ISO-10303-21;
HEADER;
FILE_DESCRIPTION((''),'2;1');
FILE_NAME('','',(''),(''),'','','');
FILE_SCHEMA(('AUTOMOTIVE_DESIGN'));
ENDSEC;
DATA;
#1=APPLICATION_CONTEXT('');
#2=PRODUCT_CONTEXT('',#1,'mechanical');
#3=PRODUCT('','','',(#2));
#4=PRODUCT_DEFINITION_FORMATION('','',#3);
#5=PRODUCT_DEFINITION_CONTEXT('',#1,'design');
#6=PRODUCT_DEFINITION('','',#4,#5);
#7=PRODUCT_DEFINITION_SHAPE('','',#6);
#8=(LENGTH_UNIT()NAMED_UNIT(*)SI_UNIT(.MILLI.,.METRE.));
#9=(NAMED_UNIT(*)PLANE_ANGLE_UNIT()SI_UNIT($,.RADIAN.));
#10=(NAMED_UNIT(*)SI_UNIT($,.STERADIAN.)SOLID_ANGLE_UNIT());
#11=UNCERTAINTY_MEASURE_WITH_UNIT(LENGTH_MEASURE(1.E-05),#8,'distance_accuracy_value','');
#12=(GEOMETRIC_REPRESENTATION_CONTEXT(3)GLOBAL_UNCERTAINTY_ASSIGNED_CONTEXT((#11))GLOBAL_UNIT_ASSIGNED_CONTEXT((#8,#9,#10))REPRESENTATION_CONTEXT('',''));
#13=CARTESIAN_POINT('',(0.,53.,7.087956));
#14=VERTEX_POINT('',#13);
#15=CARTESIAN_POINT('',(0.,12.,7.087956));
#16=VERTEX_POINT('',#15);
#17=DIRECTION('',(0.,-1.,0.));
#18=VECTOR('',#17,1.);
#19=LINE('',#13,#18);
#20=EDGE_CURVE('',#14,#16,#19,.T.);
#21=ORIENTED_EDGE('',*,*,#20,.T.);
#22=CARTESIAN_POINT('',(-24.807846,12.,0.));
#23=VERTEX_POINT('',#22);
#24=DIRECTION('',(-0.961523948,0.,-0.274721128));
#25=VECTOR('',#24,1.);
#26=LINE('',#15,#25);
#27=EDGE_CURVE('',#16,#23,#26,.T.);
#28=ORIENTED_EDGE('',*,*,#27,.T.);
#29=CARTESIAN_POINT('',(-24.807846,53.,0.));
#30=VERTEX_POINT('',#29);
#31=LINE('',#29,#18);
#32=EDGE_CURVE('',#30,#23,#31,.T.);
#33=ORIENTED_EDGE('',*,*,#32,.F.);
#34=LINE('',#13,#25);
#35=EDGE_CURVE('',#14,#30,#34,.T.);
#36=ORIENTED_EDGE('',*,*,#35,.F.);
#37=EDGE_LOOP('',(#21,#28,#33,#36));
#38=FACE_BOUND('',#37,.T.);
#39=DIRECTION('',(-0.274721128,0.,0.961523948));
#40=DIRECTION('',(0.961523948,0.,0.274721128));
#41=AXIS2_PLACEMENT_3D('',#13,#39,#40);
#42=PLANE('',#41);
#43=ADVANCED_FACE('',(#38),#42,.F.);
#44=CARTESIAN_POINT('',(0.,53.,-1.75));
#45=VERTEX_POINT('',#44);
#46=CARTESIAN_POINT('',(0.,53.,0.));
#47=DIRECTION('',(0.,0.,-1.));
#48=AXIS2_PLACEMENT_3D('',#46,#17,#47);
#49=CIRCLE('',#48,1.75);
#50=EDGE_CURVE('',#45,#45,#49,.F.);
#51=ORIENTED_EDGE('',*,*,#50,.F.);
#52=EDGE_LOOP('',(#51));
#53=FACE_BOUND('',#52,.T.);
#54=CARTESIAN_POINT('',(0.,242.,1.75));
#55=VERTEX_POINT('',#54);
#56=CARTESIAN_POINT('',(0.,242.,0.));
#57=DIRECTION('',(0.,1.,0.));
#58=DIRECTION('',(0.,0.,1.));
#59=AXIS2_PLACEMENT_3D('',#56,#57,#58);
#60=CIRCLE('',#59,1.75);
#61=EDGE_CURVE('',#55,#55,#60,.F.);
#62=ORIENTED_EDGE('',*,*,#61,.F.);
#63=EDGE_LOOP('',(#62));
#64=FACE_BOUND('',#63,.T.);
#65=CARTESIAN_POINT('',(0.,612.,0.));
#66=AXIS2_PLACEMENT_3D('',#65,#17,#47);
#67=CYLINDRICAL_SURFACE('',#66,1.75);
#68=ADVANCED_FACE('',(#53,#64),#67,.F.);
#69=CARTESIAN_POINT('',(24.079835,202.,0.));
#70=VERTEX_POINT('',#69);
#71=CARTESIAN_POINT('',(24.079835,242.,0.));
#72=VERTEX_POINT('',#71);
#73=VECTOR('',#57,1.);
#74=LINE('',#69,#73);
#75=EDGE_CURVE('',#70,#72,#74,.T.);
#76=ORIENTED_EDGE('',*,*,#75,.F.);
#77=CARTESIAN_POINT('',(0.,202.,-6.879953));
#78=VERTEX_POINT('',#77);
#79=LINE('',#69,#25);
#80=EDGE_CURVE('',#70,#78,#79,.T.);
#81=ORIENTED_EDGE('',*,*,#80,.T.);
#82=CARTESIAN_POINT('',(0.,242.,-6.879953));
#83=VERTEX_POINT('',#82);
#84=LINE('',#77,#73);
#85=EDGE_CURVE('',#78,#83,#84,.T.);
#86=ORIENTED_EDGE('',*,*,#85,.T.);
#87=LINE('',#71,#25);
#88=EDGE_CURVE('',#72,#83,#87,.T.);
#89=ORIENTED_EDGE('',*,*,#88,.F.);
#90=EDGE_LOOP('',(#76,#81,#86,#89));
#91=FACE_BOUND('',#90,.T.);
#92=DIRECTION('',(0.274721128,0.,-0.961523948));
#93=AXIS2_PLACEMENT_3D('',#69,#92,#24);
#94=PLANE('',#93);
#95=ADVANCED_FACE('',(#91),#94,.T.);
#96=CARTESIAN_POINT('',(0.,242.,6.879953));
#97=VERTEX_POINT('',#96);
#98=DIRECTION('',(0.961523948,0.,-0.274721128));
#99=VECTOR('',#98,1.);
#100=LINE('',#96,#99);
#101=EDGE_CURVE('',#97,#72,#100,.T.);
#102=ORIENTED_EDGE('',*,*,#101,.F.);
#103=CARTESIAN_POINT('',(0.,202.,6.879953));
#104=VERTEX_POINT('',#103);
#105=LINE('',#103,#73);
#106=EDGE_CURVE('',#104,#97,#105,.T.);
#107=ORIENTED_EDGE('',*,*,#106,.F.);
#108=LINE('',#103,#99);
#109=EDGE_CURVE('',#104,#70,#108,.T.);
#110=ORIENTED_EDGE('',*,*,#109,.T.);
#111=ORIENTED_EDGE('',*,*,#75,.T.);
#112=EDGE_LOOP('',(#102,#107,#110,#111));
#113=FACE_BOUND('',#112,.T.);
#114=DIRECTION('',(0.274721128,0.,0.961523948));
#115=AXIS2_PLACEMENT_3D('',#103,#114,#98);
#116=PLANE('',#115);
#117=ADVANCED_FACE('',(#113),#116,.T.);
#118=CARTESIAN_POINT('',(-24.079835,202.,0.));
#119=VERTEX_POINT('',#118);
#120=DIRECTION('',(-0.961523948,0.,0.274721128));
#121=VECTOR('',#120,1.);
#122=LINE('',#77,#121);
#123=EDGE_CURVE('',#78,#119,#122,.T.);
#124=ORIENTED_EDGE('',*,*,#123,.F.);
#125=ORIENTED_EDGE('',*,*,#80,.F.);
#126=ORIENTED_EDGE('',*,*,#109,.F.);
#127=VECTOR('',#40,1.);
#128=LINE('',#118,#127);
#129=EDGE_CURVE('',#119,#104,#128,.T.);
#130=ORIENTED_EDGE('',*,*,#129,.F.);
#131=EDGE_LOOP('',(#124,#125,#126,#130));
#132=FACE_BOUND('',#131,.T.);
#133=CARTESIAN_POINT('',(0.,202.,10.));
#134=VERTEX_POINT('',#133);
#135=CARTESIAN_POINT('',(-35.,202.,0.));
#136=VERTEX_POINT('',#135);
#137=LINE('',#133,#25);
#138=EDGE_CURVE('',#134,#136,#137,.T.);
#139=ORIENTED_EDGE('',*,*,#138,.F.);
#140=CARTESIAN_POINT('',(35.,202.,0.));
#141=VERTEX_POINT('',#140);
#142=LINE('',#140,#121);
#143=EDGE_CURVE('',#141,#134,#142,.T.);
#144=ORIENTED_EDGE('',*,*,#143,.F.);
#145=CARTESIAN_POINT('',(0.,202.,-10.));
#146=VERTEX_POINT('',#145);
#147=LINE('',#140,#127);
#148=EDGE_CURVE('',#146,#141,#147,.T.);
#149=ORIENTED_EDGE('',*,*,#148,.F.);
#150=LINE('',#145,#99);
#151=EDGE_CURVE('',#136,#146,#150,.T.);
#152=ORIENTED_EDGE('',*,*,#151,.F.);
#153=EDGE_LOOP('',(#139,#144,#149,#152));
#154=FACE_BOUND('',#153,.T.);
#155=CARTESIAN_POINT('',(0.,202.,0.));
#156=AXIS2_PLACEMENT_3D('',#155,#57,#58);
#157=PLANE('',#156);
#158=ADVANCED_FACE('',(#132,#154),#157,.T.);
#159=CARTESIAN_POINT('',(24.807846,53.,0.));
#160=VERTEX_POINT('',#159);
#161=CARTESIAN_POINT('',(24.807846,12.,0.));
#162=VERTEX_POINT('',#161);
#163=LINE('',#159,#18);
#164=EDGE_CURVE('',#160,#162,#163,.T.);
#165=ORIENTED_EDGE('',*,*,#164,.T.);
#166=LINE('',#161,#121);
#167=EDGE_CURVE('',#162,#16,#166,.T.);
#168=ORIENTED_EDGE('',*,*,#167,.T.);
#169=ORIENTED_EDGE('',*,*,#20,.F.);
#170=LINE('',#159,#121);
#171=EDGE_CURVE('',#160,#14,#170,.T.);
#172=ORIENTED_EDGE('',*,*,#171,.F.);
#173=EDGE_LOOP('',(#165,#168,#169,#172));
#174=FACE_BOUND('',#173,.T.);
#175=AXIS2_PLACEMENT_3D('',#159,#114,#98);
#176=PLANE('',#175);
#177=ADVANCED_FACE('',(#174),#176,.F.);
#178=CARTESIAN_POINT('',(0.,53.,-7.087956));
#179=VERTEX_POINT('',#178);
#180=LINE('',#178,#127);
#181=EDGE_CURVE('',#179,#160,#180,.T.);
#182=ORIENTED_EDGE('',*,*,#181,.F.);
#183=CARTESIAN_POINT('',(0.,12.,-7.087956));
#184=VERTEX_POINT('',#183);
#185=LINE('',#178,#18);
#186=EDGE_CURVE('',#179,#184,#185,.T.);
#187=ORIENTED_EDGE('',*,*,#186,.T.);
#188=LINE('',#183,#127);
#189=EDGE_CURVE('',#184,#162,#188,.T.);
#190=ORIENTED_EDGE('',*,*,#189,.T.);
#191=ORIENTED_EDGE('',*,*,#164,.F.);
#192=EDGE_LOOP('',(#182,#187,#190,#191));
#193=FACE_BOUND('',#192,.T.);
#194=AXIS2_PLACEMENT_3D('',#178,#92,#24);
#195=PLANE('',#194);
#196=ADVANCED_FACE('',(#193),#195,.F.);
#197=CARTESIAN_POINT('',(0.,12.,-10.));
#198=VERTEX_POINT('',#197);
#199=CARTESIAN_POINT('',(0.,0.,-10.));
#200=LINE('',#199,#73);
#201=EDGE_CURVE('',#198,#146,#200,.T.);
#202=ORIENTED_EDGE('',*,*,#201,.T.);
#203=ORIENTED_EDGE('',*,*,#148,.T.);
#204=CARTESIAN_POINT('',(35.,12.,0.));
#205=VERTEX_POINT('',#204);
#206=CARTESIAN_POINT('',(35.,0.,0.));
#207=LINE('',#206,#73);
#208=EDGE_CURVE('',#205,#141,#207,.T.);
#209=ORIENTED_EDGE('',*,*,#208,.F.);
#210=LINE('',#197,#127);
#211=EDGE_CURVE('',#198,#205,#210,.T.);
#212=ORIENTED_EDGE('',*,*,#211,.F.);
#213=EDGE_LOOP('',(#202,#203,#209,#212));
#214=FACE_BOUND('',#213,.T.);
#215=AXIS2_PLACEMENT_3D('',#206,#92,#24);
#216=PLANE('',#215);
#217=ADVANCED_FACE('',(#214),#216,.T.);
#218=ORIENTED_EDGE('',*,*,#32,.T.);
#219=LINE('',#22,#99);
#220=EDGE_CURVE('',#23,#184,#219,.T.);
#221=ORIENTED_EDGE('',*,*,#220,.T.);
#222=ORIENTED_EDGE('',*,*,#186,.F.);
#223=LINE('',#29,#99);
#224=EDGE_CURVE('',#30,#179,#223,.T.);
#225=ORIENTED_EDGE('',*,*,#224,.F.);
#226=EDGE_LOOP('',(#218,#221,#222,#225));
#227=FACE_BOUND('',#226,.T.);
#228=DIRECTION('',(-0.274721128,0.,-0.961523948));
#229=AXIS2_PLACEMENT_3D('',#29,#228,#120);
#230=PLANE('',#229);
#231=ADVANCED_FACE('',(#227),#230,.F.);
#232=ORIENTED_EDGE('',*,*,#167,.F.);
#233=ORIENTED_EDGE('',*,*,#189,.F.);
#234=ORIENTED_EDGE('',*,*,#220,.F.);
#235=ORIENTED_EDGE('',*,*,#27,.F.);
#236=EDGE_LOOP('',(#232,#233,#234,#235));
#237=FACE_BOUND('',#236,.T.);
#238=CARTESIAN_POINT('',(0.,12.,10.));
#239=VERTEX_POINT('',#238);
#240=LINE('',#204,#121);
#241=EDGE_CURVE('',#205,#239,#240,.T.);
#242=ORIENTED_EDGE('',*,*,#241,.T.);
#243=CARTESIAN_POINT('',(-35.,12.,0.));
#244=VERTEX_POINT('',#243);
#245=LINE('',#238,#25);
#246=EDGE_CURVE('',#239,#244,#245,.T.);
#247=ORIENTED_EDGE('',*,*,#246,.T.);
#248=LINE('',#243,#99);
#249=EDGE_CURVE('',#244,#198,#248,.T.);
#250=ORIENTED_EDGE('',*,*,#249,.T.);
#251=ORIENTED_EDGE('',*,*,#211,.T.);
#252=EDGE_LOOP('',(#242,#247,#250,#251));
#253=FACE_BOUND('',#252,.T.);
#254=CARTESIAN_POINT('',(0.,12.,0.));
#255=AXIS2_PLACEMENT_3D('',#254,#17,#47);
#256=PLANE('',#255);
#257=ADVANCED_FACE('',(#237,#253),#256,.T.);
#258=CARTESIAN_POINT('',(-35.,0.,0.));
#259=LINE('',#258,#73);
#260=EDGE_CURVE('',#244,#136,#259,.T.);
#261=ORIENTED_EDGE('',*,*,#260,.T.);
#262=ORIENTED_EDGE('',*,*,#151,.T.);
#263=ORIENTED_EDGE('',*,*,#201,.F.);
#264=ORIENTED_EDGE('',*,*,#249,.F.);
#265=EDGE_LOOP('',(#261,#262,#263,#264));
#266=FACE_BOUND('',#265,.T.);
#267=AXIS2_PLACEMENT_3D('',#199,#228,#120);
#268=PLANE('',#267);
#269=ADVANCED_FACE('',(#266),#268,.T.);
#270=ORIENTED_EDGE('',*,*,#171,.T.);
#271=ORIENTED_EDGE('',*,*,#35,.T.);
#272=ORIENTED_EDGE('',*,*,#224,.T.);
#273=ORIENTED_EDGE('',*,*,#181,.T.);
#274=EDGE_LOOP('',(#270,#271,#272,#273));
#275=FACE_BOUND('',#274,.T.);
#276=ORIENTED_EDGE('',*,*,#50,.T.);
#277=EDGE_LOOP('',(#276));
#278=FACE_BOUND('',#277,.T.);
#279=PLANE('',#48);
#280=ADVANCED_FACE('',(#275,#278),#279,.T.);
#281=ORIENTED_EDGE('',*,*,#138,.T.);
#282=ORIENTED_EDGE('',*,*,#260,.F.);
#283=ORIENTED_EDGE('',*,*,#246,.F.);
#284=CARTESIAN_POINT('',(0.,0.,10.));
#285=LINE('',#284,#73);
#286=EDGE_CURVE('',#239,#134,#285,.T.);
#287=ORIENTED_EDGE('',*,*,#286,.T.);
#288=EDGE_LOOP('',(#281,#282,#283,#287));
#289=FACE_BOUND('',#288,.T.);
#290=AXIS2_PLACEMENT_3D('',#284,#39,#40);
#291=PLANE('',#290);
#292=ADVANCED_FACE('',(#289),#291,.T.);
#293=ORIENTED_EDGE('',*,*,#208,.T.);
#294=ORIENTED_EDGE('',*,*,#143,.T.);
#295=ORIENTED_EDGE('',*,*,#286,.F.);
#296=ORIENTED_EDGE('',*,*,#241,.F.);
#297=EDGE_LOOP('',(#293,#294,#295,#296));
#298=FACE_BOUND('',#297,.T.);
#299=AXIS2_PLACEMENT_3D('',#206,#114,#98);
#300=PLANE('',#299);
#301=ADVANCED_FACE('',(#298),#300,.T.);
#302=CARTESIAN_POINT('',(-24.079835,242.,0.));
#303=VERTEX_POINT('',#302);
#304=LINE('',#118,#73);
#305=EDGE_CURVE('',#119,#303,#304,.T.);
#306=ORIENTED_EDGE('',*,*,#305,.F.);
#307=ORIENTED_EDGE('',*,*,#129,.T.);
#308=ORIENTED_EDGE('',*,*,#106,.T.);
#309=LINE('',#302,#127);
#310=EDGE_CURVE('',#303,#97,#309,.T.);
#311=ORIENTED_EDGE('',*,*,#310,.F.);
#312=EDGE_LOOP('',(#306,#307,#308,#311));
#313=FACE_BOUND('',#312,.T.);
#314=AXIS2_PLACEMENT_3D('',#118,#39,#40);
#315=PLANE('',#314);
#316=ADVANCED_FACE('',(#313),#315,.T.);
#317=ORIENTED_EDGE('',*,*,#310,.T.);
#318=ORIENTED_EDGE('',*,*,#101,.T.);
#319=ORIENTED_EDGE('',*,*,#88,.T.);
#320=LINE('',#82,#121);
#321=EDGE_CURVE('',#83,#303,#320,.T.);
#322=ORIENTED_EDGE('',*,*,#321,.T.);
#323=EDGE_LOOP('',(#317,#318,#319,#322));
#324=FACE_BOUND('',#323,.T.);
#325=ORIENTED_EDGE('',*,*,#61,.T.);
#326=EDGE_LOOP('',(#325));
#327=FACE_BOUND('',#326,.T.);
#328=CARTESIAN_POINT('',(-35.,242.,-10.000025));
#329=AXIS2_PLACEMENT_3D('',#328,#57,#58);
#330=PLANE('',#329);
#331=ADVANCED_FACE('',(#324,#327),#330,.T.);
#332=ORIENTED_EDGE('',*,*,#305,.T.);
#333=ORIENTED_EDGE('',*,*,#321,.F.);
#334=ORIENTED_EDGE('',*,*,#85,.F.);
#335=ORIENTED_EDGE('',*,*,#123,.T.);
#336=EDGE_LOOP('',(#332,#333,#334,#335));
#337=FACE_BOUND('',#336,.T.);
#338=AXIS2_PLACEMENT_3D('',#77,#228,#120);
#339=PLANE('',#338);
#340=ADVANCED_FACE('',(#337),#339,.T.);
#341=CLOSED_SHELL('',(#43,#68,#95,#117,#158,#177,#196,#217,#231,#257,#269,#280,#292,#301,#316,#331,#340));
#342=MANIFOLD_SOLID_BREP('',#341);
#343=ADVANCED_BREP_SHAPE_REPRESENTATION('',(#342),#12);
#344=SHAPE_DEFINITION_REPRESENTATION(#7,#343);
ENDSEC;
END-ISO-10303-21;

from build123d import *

# Parameters (mm, degrees)
SWEEP_1_DEPTH            = 610
CUT_EXTRUDE_2_DEPTH      = 12
SKETCH_21_R              = 1.75
CUT_EXTRUDE_3_DEPTH      = 600
CUT_EXTRUDE_4_DEPTH      = 691.959477934
CUT_EXTRUDE_4_DEPTH_BACK = 691.959477934
SKETCH_26_OUTSIDE_W      = 208.38
SKETCH_26_OUTSIDE_H      = 816.38
SKETCH_26_OUTSIDE_W_2    = 70
SKETCH_26_OUTSIDE_H_2    = 230
CUT_EXTRUDE_5_DEPTH      = 41
SKETCH_28_OUTSIDE_W      = 120.25
SKETCH_28_OUTSIDE_H      = 70.25
CUT_EXTRUDE_7_DEPTH      = 40


# Read off the part's stored shape, not the designer's step: 扫描1
with BuildPart() as part:
    # 扫描1 outline → 扫描1 (new body)
    with BuildSketch(Plane(origin=(0, 0, 0), x_dir=(1, 0, 0), z_dir=(0, 1, 0))):
        Polygon((-35, 0), (35, 0), (0, 10), align=None)
    sweep_1 = extrude(amount=SWEEP_1_DEPTH)

    # 草图1 → 放样1 section 0
    with BuildSketch(Plane.XY, mode=Mode.PRIVATE) as loft_1_s0:
        with BuildLine():
            Line((-35, 610), (0, 690))
            Line((0, 690), (35, 610))
            Line((35, 610), (-35, 610))
        make_face()
    loft_1 = loft([Vertex(0, 610, -10), loft_1_s0.sketch])

    # 镜向1: 扫描1, 放样1 across plane
    add(sweep_1.mirror(Plane.XY))
    add(loft_1.mirror(Plane.XY))

    # 草图19 → 切除-拉伸2 (cut)
    with BuildSketch(Plane.XZ):
        Polygon((0, -10), (35, 0), (0, 10), (-35, 0), align=None)
    extrude(amount=-CUT_EXTRUDE_2_DEPTH, mode=Mode.SUBTRACT)

    # 草图21 → 切除-拉伸3 (cut)
    with BuildSketch(Plane.XZ.offset(-12)):
        with Locations(Location((0, 0, 0), (0, 0, 270))):
            Circle(SKETCH_21_R)
    extrude(amount=-CUT_EXTRUDE_3_DEPTH, mode=Mode.SUBTRACT)

    # 草图26 outside → 切除-拉伸4 (cut, two sides: drawn at the far end of the back side and taken through both)
    with BuildSketch(Plane.XY.offset(-CUT_EXTRUDE_4_DEPTH_BACK)):
        with Locations((0, 351)):
            Rectangle(SKETCH_26_OUTSIDE_W, SKETCH_26_OUTSIDE_H)
        with Locations((0, 127)):
            Rectangle(SKETCH_26_OUTSIDE_W_2, SKETCH_26_OUTSIDE_H_2, mode=Mode.SUBTRACT)
    extrude(amount=CUT_EXTRUDE_4_DEPTH + CUT_EXTRUDE_4_DEPTH_BACK, mode=Mode.SUBTRACT)

    # 草图27 → 切除-拉伸5 (cut)
    with BuildSketch(Plane.XZ.offset(-12)):
        Polygon((-24.807846155, 0), (0, -7.087956044), (24.807846155, 0), (0, 7.087956044), align=None)
    extrude(amount=-CUT_EXTRUDE_5_DEPTH, mode=Mode.SUBTRACT)

    # 草图28 outside → 切除-拉伸7 (cut)
    with BuildSketch(Plane(origin=(0, 242, 0), x_dir=(1, 0, 0), z_dir=(0, 1, 0))):
        Rectangle(SKETCH_28_OUTSIDE_W, SKETCH_28_OUTSIDE_H)
        Polygon((0, 6.879952905), (-24.079835166, 0), (0, -6.879952905), (24.079835166, 0), align=None, mode=Mode.SUBTRACT)
    extrude(amount=-CUT_EXTRUDE_7_DEPTH, mode=Mode.SUBTRACT)


solid = part.part
